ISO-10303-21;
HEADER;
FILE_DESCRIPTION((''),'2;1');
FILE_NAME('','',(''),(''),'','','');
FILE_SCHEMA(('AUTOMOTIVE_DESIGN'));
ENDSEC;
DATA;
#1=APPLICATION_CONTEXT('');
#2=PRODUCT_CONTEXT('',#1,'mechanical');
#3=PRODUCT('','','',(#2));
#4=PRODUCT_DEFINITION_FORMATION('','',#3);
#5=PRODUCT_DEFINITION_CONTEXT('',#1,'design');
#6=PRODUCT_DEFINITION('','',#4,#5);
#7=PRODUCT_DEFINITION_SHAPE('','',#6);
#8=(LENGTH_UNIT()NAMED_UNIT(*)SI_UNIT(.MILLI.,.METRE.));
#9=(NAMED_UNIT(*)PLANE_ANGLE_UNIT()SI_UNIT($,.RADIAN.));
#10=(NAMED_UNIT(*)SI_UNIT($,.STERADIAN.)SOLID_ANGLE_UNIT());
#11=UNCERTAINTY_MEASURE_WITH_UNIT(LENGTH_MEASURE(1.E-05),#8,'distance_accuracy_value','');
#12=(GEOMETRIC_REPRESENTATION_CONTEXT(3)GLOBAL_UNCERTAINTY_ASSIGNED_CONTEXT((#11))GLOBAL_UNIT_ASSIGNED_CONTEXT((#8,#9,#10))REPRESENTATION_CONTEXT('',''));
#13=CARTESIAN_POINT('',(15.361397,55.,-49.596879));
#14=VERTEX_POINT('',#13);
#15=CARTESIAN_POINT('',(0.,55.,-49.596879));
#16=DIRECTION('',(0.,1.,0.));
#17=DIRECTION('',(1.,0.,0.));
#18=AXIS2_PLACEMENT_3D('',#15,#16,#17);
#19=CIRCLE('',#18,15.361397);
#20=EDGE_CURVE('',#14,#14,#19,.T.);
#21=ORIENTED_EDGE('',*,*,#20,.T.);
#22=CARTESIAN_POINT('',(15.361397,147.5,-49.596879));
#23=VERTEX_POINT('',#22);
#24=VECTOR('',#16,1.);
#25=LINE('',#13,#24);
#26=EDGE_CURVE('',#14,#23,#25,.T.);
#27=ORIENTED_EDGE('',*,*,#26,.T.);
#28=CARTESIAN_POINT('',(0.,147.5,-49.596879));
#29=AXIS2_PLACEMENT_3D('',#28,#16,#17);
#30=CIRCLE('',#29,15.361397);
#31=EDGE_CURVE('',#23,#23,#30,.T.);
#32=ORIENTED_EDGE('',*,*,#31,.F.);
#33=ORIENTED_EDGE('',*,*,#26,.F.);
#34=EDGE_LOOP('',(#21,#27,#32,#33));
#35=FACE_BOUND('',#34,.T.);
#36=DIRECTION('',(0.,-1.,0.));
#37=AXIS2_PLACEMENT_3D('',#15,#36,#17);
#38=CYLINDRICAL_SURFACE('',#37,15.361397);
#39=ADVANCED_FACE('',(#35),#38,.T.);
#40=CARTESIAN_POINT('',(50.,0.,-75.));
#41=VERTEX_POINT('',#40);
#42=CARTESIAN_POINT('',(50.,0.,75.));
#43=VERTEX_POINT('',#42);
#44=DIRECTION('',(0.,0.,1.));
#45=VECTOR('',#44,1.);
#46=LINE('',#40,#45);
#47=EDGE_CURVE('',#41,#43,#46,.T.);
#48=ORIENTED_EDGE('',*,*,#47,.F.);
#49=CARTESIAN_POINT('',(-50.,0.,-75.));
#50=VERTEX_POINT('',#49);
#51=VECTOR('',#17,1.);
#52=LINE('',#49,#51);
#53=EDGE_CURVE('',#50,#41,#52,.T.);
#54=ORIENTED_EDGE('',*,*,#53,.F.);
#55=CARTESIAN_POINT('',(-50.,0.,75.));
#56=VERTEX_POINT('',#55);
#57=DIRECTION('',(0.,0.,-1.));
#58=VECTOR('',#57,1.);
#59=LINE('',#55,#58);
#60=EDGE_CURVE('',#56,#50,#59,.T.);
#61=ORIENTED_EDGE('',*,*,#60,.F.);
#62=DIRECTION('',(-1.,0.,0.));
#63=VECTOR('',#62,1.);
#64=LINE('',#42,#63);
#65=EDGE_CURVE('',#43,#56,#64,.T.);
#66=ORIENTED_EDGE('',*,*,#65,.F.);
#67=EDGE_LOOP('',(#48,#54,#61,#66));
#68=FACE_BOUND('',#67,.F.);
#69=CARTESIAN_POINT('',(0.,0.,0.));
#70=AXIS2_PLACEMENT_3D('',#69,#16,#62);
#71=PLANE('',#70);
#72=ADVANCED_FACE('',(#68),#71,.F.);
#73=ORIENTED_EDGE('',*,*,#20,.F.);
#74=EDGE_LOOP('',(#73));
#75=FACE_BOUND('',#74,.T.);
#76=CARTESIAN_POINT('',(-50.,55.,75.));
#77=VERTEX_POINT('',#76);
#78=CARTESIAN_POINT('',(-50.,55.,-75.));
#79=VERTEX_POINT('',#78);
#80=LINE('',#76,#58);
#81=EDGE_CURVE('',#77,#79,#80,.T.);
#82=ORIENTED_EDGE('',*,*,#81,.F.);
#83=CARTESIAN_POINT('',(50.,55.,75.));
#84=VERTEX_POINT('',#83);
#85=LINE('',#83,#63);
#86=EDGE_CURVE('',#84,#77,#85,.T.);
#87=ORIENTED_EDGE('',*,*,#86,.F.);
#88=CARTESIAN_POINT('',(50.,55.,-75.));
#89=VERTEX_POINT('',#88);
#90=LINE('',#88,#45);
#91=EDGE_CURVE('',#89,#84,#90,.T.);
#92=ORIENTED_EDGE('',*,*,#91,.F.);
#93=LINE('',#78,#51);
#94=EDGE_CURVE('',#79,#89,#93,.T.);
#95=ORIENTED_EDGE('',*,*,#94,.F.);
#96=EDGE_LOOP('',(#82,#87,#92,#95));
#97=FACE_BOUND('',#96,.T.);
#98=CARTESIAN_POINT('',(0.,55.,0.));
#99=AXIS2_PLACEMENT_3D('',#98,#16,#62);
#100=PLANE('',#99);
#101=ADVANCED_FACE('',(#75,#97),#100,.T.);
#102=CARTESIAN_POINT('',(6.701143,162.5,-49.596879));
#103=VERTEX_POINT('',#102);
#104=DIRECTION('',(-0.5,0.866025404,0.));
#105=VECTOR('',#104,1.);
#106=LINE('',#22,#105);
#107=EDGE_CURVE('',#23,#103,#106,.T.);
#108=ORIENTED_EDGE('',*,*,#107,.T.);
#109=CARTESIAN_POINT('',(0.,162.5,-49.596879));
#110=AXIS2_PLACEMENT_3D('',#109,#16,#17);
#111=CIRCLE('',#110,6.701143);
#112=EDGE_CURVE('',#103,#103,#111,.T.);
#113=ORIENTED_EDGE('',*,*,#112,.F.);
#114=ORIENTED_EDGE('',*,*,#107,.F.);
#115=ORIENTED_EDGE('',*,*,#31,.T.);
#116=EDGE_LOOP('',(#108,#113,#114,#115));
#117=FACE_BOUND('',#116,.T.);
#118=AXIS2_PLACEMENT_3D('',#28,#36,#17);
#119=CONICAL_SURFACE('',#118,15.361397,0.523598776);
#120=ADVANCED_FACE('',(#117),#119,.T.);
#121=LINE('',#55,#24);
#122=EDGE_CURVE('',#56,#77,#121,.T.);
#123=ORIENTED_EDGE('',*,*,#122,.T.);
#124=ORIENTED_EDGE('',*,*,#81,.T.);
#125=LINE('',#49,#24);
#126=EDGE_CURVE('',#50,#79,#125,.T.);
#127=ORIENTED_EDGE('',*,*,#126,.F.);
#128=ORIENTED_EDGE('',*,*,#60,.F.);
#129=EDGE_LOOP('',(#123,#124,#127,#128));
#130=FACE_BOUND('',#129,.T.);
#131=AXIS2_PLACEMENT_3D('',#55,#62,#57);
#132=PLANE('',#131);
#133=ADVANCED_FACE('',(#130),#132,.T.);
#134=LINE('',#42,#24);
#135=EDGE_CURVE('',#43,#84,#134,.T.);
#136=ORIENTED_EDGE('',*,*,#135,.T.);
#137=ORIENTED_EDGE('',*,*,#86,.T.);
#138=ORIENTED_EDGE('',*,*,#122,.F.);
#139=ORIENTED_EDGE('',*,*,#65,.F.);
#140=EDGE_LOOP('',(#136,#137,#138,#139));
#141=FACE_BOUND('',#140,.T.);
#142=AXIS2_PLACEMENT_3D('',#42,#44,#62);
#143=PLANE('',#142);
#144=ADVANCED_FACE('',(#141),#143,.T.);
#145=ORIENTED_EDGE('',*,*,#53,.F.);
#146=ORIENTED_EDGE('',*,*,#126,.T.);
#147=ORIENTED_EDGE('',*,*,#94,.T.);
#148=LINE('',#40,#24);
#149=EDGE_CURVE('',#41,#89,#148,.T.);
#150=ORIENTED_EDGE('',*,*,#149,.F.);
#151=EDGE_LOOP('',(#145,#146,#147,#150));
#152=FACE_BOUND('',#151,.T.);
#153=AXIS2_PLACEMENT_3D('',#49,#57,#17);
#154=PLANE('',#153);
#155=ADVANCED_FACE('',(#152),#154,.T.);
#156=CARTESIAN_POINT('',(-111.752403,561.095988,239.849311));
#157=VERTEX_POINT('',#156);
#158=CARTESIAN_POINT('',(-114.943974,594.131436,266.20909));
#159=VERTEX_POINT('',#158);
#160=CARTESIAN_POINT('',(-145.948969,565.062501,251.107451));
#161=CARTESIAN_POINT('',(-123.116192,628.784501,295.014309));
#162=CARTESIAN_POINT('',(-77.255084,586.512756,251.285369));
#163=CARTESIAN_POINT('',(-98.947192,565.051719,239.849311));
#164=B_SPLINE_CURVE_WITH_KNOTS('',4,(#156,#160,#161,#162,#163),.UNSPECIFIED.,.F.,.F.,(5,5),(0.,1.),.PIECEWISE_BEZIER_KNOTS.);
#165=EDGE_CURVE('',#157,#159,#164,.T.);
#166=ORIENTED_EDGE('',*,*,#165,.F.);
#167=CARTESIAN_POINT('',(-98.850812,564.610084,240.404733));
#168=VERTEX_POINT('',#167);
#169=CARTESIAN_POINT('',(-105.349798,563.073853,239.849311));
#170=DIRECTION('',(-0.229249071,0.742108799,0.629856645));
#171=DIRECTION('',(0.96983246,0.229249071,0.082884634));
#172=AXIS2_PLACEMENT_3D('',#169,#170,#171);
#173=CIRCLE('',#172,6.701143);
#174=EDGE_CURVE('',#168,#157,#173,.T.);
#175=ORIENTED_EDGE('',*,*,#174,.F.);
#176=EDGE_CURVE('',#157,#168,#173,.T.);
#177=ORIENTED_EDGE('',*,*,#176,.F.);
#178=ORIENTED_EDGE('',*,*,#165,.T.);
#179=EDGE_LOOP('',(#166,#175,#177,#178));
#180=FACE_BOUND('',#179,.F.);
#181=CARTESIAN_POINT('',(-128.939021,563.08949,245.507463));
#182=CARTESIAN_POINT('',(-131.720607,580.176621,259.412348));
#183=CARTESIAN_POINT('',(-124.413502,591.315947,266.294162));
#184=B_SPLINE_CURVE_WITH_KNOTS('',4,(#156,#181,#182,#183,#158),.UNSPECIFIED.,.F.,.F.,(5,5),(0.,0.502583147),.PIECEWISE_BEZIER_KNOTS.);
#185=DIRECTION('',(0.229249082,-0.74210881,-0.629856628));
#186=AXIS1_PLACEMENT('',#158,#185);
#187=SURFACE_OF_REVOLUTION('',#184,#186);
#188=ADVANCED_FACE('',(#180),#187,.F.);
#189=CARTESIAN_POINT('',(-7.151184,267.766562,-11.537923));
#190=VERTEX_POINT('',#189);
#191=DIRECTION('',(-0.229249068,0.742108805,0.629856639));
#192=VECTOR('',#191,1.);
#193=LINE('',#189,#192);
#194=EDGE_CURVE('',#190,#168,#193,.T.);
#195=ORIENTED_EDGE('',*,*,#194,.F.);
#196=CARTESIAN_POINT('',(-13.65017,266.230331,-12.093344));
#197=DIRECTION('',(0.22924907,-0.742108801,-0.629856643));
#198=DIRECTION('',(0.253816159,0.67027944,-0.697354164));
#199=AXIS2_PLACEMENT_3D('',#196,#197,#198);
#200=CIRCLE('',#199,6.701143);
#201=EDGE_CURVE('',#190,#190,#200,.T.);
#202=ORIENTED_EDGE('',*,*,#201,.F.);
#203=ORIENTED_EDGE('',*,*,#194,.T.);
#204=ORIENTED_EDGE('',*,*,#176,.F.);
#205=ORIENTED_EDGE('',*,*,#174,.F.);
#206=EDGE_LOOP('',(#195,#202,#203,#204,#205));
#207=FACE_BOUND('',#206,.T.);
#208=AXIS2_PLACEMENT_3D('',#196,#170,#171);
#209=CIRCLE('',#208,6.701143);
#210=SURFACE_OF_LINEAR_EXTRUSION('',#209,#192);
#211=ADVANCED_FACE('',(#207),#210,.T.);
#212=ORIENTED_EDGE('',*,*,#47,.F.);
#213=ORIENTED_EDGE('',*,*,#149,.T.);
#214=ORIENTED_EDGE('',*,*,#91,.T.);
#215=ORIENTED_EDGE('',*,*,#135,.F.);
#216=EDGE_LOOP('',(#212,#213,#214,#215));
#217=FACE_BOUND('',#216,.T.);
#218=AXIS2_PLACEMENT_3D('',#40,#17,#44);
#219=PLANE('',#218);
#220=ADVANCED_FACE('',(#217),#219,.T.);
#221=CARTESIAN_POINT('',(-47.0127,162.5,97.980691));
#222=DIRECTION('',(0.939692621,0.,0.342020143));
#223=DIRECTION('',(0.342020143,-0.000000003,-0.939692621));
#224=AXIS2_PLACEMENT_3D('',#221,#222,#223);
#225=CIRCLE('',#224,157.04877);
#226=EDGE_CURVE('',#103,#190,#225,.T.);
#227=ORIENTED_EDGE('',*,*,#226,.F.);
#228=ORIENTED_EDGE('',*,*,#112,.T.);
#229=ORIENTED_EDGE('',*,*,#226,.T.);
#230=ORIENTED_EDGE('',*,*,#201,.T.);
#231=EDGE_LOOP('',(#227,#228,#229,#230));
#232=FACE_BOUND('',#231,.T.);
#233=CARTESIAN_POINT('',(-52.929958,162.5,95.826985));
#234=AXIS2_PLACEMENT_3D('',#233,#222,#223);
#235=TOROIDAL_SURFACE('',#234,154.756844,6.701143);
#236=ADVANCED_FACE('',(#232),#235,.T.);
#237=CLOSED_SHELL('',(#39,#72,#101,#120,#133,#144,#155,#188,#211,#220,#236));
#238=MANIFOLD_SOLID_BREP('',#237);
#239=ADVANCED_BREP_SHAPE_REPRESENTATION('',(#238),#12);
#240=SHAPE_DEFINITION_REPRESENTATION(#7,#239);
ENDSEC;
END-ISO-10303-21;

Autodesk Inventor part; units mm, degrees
ref_plane "YZ Plane" through (0, 0, 0) normal (1, 0, 0) x (0, 1, 0)
ref_plane "XZ Plane" through (0, 0, 0) normal (0, 1, 0) x (-1, 0, 0)
ref_plane "XY Plane" through (0, 0, 0) normal (0, 0, 1) x (1, 0, 0)
sketch "草圖1" plane through (0, 0, 0) normal (0, 1, 0) x (-1, 0, 0)
  line L0 (-50, 75) -> (50, 75)
  line L1 (50, 75) -> (50, -75)
  line L2 (50, -75) -> (-50, -75)
  line L3 (-50, -75) -> (-50, 75)
  line L4 (-50, 75) -> (50, -75) construction
  line L5 (50, 75) -> (-50, -75) construction
  point P0 (0, 0)
  dimension "d0" = 100
  dimension "d1" = 150
extrude "擠出1" add sketch "草圖1" along normal blind 55
sketch "草圖2" plane through (0, 55, 0) normal (0, 1, 0) x (1, 0, 0)
  circle A0 centre (0, 49.596879) radius 15.361397
  point P0 (0, 0)
extrude "擠出2" add sketch "草圖2" along normal blind 92.5
sketch "草圖3" plane through (0, 147.5, -49.596879) normal (0, 1, 0) x (1, 0, 0)
  circle A0 centre (0, 0) radius 15.361397
  point P0 (0, -49.596879)
extrude "擠出3" add sketch "草圖3" along normal blind 15 draft -30
sketch "草圖8" plane through (0, 162.5, -49.596879) normal (0, 1, 0) x (1, 0, 0)
  circle A0 centre (0, 0) radius 6.701143
  line L0 (0, 0) -> (-74.851571, -205.653002)
  line L1 (0, 0) -> (218.851354, 0) construction
  point P0 (0, -49.596879)
  dimension "d14" = 110
surface extrude "擠出表面2" sketch "草圖8" along normal blind 8 shown no curves L0
sketch "草圖4" plane through (-14.690503, 0, -9.235054) normal (0.9396926, 0, 0.3420201) x (0, 1, 0)
  line L0 (55, -69.985594) -> (0, -69.985594) construction
  line L1 (0, -69.985594) -> (0, 89.641072) construction
  line L2 (55, 89.641072) -> (55, -27.590761) construction
  line L3 (55, -27.590761) -> (147.5, -27.590761) construction
  line L4 (147.5, -27.590761) -> (162.5, -36.251015) construction
  line L5 (162.5, -36.251015) -> (162.5, -49.6533) construction
  line L6 (162.5, -49.6533) -> (147.5, -58.313554) construction
  line L7 (147.5, -58.313554) -> (55, -58.313554) construction
  line L8 (55, -58.313554) -> (55, -69.985594) construction
  line L9 (162.5, -36.251015) -> (162.5, -49.6533) construction
  arc A0 (162.5, -42.952157) -> (266.230331, -3.041729) centre (162.5, 111.804689) ccw
  line L10 (266.230331, -3.041729) -> (563.073853, 265.070045)
  line L11 (0, 89.641072) -> (55, 89.641072)
  point P0 (0, 3.653664)
  dimension "d8" = 400
sketch "草圖5" plane through (0, 162.5, -49.596879) normal (0, 1, 0) x (1, 0, 0)
  circle A0 centre (0, 0) radius 6.701143
  point P0 (0, -49.596879)
sweep "掃掠1" add profiles "草圖5" path "草圖4" path curves A0 L10
sketch "草圖6" plane through (-105.349798, 563.073853, 239.849311) normal (-0.2292491, 0.7421088, 0.6298566) x (0.9554499, 0.2951535, 0)
  circle A0 centre (0, 0) radius 6.701143
  circle A1 centre (0, 0) radius 6.701143
  line L0 (-6.701143, 0) -> (6.701143, 0)
  point P0 (-65.536753, -172.147129)
  point P1 (0, 0)
surface extrude "擠出表面1" sketch "草圖6" along normal blind 8 shown yes curves L0
sketch "草圖7" plane through (-98.947192, 565.051719, 239.849311) normal (-0.1859044, 0.6017964, -0.7767114) x (-0.9554499, -0.2951535, 0)
  line L0 (13.402285, 0) -> (0, 0)
  line L1 (13.402285, 0) -> (0, 0)
  spline S0 degree 4 poles (13.402285, 0) (44.904659, 17.87413) (4.281315, 87.58342) (-27.060021, 18.156606) (0, 0) knots 0 0 0 0 0 1 1 1 1 1
  line L2 (6.701143, 41.850443) -> (6.701143, 0)
  line L3 (13.402285, 0) -> (0, 0)
  point P0 (72.237896, -593.084089)
  point P1 (21.56931, 30.293196)
  point P2 (-7.261182, 30.293196)
revolve "迴轉1" add sketch "草圖7" angle 360 about axis through (-114.943973, 594.131436, 266.20909) along (0.2292491, -0.7421088, -0.6298566) picked at (11.989428, 23.179775) contours L0 L2 S0
properties part number "無線麥克風組"
